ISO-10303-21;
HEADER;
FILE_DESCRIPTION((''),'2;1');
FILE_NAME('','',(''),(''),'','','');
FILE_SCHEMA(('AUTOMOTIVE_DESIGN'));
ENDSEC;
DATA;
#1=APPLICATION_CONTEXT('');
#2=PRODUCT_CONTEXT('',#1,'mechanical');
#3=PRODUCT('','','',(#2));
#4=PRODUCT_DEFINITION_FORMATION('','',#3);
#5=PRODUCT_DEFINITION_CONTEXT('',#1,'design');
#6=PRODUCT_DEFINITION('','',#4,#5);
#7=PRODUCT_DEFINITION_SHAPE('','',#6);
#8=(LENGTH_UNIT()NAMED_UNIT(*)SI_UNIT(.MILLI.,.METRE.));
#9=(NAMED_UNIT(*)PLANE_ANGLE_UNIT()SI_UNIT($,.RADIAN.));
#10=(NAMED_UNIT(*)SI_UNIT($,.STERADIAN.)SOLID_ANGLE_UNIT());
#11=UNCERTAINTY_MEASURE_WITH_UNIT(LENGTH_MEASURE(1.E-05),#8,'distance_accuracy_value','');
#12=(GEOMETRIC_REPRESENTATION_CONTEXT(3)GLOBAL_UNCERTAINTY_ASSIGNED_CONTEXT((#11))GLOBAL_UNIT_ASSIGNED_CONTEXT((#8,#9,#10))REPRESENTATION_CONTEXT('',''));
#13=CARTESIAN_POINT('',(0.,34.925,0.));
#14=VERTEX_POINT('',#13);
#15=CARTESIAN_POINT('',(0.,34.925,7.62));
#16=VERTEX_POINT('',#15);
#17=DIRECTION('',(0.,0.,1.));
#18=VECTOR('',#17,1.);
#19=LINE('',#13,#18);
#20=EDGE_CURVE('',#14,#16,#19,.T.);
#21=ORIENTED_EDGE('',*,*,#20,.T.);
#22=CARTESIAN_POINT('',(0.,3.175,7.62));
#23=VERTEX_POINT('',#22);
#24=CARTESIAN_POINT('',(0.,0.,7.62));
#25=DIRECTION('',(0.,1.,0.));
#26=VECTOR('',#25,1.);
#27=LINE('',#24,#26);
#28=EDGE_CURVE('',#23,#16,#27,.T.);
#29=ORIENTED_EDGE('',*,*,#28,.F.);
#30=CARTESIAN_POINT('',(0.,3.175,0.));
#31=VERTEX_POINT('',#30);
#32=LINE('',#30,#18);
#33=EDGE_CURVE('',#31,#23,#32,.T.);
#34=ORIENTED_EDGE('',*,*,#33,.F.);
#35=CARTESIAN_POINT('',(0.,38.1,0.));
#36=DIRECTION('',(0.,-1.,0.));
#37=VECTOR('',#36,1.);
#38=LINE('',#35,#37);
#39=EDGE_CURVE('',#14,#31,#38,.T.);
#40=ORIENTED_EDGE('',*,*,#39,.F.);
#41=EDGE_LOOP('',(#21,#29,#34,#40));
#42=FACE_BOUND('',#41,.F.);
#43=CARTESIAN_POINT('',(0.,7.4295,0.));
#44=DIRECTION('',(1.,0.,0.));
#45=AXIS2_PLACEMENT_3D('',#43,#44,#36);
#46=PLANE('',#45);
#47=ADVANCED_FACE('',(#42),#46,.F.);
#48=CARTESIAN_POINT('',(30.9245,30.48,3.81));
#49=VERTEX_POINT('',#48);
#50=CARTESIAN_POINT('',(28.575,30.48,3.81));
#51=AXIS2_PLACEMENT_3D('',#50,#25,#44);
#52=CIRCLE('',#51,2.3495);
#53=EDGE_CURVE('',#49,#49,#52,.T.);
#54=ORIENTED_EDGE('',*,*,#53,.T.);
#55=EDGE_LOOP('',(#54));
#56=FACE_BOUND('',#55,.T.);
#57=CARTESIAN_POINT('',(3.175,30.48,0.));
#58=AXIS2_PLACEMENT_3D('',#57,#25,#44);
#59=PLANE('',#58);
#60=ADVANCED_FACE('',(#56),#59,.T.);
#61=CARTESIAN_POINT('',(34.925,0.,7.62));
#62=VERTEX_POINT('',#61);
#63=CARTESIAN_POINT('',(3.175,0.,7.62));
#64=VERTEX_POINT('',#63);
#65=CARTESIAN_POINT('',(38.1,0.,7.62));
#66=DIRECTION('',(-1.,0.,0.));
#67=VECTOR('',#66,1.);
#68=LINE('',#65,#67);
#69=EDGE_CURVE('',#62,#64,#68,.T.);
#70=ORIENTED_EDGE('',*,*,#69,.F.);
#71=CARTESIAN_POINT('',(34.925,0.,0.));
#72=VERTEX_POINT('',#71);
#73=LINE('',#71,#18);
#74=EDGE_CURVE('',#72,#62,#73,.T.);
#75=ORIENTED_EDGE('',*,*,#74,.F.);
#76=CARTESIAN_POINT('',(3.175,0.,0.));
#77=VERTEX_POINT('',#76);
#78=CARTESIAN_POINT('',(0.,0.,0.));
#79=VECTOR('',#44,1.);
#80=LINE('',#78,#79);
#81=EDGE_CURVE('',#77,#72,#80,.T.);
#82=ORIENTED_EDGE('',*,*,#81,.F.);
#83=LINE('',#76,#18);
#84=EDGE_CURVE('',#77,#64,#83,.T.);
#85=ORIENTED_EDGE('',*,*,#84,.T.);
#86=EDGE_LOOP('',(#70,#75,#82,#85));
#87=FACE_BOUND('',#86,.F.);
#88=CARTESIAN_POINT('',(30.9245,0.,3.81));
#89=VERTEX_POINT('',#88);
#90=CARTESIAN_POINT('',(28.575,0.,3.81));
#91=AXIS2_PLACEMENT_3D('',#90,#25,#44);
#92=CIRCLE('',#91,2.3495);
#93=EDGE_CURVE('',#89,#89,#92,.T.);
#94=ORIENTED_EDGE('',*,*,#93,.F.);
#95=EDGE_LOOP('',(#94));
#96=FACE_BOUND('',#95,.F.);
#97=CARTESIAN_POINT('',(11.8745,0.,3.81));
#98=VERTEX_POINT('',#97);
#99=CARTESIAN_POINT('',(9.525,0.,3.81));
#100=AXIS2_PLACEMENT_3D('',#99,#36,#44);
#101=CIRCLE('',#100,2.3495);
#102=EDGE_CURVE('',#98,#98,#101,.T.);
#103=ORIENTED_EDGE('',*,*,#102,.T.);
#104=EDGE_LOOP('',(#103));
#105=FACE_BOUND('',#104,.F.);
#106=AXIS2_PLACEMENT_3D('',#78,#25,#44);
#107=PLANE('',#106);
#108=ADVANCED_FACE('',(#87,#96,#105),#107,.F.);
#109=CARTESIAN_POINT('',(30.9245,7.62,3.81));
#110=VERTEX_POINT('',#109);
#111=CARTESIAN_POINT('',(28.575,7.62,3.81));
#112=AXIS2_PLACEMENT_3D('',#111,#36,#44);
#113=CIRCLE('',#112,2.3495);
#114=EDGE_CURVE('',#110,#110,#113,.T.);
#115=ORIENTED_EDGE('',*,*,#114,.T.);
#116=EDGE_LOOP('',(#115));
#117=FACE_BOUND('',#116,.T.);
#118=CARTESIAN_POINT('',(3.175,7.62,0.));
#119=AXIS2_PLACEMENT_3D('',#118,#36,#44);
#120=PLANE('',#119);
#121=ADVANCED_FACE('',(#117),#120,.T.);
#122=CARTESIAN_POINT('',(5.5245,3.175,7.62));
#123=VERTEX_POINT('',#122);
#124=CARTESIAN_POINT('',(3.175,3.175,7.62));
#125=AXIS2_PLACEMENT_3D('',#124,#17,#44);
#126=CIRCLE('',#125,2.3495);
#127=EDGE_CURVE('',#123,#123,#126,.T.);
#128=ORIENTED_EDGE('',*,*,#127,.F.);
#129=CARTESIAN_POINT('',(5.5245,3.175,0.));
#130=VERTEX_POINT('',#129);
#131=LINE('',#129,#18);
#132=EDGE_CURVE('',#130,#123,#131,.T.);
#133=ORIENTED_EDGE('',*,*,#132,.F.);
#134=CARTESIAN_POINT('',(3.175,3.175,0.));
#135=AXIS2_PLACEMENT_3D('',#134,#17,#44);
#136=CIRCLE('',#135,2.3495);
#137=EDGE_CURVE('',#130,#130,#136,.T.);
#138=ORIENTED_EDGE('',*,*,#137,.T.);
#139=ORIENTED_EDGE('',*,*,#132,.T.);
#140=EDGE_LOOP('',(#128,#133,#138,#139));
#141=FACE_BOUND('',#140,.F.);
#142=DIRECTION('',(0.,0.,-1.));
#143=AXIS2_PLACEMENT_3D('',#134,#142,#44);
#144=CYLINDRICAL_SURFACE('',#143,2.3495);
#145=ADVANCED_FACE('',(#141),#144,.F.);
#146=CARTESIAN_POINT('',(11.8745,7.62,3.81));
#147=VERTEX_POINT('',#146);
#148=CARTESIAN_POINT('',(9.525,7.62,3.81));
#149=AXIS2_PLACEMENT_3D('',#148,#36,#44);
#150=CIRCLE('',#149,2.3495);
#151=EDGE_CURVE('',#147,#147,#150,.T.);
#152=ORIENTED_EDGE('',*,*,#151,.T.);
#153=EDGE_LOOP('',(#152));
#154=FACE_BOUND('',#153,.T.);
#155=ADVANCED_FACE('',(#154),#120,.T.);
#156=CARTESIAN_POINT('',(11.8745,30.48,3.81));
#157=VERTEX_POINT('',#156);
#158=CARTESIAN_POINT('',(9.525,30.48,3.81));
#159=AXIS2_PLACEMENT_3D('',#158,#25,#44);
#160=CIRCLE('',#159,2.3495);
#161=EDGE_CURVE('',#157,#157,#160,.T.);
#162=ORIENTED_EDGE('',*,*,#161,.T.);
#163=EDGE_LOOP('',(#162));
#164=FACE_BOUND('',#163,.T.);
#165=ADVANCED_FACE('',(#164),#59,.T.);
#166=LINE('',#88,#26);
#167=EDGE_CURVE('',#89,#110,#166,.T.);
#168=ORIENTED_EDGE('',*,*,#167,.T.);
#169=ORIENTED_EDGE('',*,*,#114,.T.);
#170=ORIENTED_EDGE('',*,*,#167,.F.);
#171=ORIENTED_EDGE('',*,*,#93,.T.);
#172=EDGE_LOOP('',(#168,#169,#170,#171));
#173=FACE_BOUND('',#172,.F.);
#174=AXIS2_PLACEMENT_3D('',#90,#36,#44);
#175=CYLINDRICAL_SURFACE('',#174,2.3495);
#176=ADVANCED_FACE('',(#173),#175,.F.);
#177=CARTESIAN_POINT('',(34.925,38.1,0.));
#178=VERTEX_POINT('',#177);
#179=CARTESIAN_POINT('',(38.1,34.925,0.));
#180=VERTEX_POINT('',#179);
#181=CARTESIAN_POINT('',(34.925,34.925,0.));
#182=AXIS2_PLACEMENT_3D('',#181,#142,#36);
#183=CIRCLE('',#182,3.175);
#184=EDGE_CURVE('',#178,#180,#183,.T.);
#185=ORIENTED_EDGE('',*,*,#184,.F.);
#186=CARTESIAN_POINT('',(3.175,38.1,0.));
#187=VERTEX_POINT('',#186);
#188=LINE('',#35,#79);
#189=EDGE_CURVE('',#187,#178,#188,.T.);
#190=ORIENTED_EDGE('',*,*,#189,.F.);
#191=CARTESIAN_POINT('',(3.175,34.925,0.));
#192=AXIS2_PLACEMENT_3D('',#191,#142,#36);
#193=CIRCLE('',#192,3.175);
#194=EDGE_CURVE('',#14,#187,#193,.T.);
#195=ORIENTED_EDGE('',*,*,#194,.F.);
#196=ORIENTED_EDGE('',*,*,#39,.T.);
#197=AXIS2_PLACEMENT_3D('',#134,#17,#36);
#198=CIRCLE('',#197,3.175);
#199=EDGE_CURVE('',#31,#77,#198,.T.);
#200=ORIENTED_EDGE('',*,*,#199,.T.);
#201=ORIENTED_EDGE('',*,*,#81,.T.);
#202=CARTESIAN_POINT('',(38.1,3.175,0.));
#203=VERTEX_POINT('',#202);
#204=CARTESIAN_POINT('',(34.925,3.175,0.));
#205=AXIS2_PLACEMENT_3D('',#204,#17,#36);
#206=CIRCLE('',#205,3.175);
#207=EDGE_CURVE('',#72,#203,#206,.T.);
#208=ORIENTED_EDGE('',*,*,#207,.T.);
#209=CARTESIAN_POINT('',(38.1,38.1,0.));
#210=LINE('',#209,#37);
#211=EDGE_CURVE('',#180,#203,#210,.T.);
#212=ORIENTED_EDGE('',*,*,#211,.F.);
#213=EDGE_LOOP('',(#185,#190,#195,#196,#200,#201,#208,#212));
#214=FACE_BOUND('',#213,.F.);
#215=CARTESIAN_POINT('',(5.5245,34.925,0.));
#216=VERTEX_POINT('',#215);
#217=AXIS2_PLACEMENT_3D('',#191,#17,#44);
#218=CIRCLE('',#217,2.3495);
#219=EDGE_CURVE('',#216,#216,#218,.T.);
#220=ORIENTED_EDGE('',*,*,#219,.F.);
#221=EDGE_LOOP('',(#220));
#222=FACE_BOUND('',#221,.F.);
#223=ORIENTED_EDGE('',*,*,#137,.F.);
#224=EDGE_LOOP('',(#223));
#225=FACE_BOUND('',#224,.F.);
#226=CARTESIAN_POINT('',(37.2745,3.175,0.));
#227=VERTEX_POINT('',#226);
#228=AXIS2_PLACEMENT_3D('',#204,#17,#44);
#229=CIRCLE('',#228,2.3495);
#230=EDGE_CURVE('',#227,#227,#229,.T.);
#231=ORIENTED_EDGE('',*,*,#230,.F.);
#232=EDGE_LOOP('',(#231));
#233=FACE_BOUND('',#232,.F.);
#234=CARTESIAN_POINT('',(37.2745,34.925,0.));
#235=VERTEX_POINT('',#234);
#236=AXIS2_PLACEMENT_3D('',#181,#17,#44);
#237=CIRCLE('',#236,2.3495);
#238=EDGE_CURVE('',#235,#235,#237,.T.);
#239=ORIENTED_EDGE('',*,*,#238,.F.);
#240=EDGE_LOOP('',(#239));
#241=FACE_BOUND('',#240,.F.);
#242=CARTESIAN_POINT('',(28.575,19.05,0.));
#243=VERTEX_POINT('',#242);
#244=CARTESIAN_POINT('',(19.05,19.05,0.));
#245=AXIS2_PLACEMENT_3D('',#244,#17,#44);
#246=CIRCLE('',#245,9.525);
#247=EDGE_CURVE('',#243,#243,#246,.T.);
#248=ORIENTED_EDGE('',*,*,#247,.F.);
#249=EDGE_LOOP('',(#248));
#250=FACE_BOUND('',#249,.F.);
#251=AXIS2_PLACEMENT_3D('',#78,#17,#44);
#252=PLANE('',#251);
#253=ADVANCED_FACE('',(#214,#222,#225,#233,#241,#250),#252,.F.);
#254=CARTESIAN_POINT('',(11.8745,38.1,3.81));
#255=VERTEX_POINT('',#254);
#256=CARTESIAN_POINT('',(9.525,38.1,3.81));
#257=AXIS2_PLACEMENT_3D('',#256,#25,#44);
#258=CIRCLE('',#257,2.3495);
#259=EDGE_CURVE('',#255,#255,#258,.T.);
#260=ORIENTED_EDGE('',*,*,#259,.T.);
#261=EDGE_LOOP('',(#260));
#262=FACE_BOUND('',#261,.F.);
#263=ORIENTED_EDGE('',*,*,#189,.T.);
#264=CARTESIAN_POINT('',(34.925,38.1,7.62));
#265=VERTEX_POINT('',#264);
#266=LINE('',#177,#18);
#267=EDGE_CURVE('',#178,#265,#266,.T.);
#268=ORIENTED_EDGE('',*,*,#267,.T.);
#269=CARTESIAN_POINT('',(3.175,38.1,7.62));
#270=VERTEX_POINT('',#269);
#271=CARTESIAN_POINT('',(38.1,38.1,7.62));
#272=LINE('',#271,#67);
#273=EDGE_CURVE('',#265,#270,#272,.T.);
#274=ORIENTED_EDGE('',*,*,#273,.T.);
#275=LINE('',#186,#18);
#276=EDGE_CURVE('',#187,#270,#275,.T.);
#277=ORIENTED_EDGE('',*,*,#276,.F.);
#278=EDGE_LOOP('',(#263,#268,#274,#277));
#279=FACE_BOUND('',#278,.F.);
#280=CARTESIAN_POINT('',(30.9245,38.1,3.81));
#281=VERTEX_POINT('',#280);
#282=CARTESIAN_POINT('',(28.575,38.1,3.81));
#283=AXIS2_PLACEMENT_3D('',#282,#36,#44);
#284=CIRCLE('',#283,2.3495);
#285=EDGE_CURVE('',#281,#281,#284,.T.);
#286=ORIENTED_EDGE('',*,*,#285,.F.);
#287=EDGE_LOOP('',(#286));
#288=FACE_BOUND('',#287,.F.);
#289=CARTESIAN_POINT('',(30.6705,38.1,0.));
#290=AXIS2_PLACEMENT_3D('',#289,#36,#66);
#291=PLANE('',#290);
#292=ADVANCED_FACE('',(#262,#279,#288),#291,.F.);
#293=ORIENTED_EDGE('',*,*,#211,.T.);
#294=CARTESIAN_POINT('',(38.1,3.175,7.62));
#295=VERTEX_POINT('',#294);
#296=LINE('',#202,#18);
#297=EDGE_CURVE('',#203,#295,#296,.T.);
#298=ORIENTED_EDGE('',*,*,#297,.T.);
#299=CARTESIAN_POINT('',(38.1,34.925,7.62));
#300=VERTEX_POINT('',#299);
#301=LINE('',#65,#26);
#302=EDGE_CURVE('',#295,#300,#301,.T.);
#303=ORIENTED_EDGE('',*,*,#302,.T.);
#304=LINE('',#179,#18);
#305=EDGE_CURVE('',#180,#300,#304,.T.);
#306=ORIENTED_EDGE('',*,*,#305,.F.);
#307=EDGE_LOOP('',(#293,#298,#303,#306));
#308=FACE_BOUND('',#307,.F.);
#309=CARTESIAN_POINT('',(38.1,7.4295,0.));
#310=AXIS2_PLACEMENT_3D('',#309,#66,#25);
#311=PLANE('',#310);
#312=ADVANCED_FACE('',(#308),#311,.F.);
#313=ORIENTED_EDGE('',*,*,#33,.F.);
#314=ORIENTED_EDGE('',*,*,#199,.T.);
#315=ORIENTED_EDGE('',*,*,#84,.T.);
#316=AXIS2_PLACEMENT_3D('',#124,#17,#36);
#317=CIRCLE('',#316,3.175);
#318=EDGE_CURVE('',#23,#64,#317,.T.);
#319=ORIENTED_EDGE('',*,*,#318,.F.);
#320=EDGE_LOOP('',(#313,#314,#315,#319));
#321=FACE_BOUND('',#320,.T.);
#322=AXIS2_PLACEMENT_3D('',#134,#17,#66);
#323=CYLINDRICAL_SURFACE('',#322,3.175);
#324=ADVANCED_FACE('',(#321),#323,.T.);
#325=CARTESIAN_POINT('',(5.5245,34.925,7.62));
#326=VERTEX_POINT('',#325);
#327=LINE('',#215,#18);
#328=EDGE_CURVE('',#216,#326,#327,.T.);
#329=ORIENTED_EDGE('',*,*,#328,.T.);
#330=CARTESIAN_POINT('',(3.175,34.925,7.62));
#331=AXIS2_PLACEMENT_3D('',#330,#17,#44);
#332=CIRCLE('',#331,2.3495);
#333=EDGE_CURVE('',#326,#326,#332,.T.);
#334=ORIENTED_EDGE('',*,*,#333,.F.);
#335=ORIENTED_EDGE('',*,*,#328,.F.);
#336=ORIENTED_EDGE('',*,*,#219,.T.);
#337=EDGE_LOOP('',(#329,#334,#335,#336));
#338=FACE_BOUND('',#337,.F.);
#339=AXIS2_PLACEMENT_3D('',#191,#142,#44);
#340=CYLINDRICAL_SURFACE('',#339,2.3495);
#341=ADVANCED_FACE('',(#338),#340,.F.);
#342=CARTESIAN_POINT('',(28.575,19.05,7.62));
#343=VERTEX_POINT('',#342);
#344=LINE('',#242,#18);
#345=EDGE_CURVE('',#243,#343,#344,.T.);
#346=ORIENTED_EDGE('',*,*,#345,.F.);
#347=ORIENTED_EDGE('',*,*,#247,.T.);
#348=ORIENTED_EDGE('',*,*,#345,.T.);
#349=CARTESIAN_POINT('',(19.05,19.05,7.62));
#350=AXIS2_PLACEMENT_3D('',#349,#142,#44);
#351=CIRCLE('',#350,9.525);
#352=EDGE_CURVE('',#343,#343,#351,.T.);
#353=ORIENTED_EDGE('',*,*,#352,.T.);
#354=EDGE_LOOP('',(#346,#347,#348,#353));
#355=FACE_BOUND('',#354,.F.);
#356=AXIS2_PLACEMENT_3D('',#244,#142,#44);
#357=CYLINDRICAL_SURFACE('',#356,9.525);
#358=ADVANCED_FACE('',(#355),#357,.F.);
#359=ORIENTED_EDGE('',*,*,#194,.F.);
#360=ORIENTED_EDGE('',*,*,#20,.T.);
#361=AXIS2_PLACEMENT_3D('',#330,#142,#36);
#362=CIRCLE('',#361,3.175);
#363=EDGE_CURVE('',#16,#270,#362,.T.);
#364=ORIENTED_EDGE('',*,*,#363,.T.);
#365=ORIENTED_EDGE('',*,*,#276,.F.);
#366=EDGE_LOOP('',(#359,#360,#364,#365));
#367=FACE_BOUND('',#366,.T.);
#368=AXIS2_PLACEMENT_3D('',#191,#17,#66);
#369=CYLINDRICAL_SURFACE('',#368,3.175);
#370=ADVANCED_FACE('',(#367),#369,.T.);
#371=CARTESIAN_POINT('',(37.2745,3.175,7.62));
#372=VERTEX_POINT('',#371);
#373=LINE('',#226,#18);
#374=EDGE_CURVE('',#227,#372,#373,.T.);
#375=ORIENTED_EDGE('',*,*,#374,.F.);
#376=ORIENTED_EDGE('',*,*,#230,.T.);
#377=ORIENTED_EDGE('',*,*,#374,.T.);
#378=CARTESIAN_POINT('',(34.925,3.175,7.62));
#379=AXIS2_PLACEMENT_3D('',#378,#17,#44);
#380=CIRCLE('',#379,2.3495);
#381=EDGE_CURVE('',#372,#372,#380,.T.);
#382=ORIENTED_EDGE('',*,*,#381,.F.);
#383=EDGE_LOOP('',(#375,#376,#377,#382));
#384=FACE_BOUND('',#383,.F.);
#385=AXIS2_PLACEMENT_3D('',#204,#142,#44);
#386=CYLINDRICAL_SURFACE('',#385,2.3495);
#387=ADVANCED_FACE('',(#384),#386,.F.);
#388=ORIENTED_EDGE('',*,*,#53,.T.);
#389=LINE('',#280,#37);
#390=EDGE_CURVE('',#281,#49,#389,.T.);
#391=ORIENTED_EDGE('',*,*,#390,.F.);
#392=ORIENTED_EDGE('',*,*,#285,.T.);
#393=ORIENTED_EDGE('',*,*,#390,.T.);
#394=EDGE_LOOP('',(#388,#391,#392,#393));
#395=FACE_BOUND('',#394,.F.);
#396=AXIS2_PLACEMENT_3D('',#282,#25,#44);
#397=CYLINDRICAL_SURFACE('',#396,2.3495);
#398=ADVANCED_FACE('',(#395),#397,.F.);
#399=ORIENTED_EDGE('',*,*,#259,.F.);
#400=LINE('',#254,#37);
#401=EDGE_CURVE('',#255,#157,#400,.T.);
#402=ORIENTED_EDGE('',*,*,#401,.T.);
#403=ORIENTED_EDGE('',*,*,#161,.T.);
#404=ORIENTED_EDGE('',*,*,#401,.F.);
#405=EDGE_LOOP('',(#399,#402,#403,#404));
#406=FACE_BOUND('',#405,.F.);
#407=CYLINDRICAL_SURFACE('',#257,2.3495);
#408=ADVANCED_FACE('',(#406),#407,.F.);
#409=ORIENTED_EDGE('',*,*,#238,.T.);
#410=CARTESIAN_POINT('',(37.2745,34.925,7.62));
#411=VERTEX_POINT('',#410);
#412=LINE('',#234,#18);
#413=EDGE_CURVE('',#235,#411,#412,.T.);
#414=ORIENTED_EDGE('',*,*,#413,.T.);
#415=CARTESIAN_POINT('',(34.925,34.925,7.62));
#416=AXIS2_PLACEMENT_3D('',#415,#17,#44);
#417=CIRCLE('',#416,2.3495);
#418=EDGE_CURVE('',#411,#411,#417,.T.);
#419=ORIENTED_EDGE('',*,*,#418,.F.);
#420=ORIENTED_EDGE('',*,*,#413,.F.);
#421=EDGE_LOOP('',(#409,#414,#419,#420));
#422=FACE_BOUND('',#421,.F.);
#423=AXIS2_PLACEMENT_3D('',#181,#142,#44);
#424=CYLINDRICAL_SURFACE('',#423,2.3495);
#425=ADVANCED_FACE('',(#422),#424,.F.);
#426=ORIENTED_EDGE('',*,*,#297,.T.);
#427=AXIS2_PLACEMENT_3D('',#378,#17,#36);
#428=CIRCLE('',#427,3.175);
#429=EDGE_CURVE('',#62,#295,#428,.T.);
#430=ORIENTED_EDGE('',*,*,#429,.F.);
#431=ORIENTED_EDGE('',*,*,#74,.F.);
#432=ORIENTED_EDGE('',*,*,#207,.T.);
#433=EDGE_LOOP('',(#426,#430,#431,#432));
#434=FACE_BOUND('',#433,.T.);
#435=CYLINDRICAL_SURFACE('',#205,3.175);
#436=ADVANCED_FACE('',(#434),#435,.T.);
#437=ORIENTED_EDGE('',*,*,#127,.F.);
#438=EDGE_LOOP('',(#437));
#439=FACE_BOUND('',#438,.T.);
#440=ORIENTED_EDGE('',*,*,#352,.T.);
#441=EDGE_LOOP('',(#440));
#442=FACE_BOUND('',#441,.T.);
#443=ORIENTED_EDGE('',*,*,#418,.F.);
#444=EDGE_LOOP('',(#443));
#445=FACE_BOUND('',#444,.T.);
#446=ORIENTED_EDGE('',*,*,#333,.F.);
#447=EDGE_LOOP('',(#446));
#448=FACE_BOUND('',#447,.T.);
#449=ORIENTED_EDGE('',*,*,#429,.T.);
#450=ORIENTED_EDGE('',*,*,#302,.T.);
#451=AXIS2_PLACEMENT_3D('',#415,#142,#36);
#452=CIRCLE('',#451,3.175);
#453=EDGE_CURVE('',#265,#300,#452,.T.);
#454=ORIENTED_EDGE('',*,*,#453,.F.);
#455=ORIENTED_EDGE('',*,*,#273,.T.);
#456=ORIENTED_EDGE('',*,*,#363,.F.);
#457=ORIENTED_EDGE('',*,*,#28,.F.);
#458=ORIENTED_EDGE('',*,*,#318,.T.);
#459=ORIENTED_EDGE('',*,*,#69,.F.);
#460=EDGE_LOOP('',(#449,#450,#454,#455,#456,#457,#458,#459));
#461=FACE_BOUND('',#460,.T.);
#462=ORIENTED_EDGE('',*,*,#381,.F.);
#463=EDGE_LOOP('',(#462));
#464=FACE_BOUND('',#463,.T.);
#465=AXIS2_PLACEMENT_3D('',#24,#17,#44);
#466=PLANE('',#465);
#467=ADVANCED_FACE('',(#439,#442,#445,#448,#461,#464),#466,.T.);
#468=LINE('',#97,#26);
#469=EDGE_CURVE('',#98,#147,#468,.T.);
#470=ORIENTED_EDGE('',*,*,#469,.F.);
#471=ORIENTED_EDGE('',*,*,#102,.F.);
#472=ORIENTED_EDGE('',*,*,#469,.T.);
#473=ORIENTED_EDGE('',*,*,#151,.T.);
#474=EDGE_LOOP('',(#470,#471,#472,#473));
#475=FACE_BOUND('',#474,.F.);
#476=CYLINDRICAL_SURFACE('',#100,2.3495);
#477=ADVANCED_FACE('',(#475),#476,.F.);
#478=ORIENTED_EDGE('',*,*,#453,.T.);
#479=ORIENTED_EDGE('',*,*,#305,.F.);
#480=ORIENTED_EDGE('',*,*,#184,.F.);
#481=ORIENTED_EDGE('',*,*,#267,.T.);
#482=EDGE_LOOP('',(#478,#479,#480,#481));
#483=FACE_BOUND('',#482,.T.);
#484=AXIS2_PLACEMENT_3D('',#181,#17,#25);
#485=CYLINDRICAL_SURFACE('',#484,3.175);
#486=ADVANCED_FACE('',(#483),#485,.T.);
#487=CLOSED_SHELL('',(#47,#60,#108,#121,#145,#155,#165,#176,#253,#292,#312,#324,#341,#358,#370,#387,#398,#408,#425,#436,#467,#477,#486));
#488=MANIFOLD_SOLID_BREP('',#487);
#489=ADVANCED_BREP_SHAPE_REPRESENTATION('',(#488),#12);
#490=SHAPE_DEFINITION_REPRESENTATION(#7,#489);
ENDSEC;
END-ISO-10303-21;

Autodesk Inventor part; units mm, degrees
ref_plane "YZ Plane" through (0, 0, 0) normal (1, 0, 0) x (0, 1, 0)
ref_plane "XZ Plane" through (0, 0, 0) normal (0, 1, 0) x (-1, 0, 0)
ref_plane "XY Plane" through (0, 0, 0) normal (0, 0, 1) x (1, 0, 0)
sketch "Sketch1" plane through (0, 0, 0) normal (0, 0, 1) x (1, 0, 0)
  line L0 (0, 0) -> (38.1, 0)
  line L1 (38.1, 0) -> (38.1, 38.1)
  line L2 (38.1, 38.1) -> (0, 38.1)
  line L3 (0, 38.1) -> (0, 0)
  circle A0 centre (3.175, 34.925) radius 2.3495
  circle A1 centre (34.925, 34.925) radius 2.3495
  circle A2 centre (3.175, 3.175) radius 2.3495
  circle A3 centre (34.925, 3.175) radius 2.3495
  line L4 (0, 19.05) -> (19.05, 19.05)
  circle A4 centre (19.05, 19.05) radius 9.525
  circle A5 centre (19.05, 19.05) radius 6.35
  line L5 (7.4295, 34.925) -> (7.4295, 38.1)
  line L6 (0, 30.6705) -> (3.175, 30.6705)
  arc A6 (3.175, 30.6705) -> (7.4295, 34.925) centre (3.175, 34.925) ccw
  line L7 (5.5245, 34.925) -> (7.4295, 34.925)
  line L8 (3.175, 7.4295) -> (0, 7.4295)
  line L9 (7.4295, 0) -> (7.4295, 3.175)
  arc A7 (7.4295, 3.175) -> (3.175, 7.4295) centre (3.175, 3.175) ccw
  line L10 (30.6705, 3.175) -> (30.6705, 0)
  line L11 (38.1, 7.4295) -> (34.925, 7.4295)
  arc A8 (34.925, 7.4295) -> (30.6705, 3.175) centre (34.925, 3.175) ccw
  line L12 (34.925, 30.6705) -> (38.1, 30.6705)
  line L13 (30.6705, 38.1) -> (30.6705, 34.925)
  arc A9 (30.6705, 34.925) -> (34.925, 30.6705) centre (34.925, 34.925) ccw
  line L14 (0, 7.4295) -> (0, 0)
  line L15 (0, 0) -> (7.4295, 0)
  line L16 (30.6705, 0) -> (38.1, 0)
  line L17 (38.1, 0) -> (38.1, 7.4295)
  line L18 (30.6705, 38.1) -> (38.1, 38.1)
  line L19 (38.1, 38.1) -> (38.1, 30.6705)
  dimension "d2" = 4.699
  dimension "d0" = 38.1
  dimension "d1" = 38.1
  dimension "d5" = 31.75
  dimension "d8" = 31.75
  dimension "d11" = 3.175
  dimension "d12" = 3.175
  dimension "d13" = 19.05
  dimension "d14" = 19.05
  dimension "d15" = 12.7
  dimension "d16" = 3.175
  dimension "d17" = 3.175
  dimension "d18" = 1.905
  dimension "d24" = 360
extrude "Extrusion1" add sketch "Sketch1" along normal blind 7.62 contours L3 L8 A7 L9 L0 | L9 A7 L8 L3 L6 A6 L5 L2 L13 A9 L12 L1 L11 A8 L10 L0 | L10 A8 L11 L1 L0 | L3 L2 L5 A6 L6 | L12 A9 L13 L2 L1
fillet "Fillet1" radius 3.175 4 edges at (0, 38.1, 3.81) (38.1, 38.1, 3.81) (0, 0, 3.81) (38.1, 0, 3.81)
sketch "Sketch2" plane through (3.175, 38.1, 0) normal (0, 1, 0) x (1, 0, 0)
  line L0 (31.75, 0) -> (0, 0) projected
  line L1 (0, -7.62) -> (31.75, -7.62) projected
  line L2 (15.875, 0) -> (15.875, -3.81)
  line L3 (15.875, -3.81) -> (25.4, -3.81)
  line L4 (15.875, -3.81) -> (6.35, -3.81)
  circle A0 centre (25.4, -3.81) radius 2.3495
  circle A1 centre (6.35, -3.81) radius 2.3495
  point P0 (-3.175, 0)
  dimension "d29" = 3.81
  dimension "d30" = 9.525
  dimension "d31" = 9.525
  dimension "d32" = 4.699
  dimension "d33" = 4.699
extrude "Extrusion2" cut sketch "Sketch2" against normal blind 7.62
sketch "Sketch3" plane through (3.175, 0, 0) normal (0, -1, 0) x (1, 0, 0)
  line L0 (0, 0) -> (31.75, 0) projected
  line L1 (15.875, 0) -> (15.875, 3.81)
  line L2 (15.875, 3.81) -> (6.35, 3.81)
  line L3 (15.875, 3.81) -> (25.4, 3.81)
  circle A0 centre (6.35, 3.81) radius 2.3495
  circle A1 centre (25.4, 3.81) radius 2.3495
  point P0 (-3.175, 0)
  dimension "d36" = 3.81
  dimension "d37" = 9.525
  dimension "d38" = 9.525
  dimension "d39" = 4.699
  dimension "d40" = 4.699
extrude "Extrusion3" cut sketch "Sketch3" against normal blind 7.62
thread "Thread1" size "10-32 UNF" class "2B" standard "ANSI Unified Screw Threads" full length
thread "Thread2" size "10-32 UNF" class "2B" standard "ANSI Unified Screw Threads" full length
thread "Thread3" size "10-32 UNF" class "2B" standard "ANSI Unified Screw Threads" full length
thread "Thread4" size "10-32 UNF" class "2B" standard "ANSI Unified Screw Threads" full length
thread "Thread5" size "10-32 UNF" class "2B" standard "ANSI Unified Screw Threads" full length
thread "Thread6" size "10-32 UNF" class "2B" standard "ANSI Unified Screw Threads" full length
thread "Thread7" size "10-32 UNF" class "2B" standard "ANSI Unified Screw Threads" full length
thread "Thread8" size "10-32 UNF" class "2B" standard "ANSI Unified Screw Threads" full length
equation "\"d16\" = d11"
equation "\"d17\" = d11"
properties part number "Gearbox End Plate 2"
